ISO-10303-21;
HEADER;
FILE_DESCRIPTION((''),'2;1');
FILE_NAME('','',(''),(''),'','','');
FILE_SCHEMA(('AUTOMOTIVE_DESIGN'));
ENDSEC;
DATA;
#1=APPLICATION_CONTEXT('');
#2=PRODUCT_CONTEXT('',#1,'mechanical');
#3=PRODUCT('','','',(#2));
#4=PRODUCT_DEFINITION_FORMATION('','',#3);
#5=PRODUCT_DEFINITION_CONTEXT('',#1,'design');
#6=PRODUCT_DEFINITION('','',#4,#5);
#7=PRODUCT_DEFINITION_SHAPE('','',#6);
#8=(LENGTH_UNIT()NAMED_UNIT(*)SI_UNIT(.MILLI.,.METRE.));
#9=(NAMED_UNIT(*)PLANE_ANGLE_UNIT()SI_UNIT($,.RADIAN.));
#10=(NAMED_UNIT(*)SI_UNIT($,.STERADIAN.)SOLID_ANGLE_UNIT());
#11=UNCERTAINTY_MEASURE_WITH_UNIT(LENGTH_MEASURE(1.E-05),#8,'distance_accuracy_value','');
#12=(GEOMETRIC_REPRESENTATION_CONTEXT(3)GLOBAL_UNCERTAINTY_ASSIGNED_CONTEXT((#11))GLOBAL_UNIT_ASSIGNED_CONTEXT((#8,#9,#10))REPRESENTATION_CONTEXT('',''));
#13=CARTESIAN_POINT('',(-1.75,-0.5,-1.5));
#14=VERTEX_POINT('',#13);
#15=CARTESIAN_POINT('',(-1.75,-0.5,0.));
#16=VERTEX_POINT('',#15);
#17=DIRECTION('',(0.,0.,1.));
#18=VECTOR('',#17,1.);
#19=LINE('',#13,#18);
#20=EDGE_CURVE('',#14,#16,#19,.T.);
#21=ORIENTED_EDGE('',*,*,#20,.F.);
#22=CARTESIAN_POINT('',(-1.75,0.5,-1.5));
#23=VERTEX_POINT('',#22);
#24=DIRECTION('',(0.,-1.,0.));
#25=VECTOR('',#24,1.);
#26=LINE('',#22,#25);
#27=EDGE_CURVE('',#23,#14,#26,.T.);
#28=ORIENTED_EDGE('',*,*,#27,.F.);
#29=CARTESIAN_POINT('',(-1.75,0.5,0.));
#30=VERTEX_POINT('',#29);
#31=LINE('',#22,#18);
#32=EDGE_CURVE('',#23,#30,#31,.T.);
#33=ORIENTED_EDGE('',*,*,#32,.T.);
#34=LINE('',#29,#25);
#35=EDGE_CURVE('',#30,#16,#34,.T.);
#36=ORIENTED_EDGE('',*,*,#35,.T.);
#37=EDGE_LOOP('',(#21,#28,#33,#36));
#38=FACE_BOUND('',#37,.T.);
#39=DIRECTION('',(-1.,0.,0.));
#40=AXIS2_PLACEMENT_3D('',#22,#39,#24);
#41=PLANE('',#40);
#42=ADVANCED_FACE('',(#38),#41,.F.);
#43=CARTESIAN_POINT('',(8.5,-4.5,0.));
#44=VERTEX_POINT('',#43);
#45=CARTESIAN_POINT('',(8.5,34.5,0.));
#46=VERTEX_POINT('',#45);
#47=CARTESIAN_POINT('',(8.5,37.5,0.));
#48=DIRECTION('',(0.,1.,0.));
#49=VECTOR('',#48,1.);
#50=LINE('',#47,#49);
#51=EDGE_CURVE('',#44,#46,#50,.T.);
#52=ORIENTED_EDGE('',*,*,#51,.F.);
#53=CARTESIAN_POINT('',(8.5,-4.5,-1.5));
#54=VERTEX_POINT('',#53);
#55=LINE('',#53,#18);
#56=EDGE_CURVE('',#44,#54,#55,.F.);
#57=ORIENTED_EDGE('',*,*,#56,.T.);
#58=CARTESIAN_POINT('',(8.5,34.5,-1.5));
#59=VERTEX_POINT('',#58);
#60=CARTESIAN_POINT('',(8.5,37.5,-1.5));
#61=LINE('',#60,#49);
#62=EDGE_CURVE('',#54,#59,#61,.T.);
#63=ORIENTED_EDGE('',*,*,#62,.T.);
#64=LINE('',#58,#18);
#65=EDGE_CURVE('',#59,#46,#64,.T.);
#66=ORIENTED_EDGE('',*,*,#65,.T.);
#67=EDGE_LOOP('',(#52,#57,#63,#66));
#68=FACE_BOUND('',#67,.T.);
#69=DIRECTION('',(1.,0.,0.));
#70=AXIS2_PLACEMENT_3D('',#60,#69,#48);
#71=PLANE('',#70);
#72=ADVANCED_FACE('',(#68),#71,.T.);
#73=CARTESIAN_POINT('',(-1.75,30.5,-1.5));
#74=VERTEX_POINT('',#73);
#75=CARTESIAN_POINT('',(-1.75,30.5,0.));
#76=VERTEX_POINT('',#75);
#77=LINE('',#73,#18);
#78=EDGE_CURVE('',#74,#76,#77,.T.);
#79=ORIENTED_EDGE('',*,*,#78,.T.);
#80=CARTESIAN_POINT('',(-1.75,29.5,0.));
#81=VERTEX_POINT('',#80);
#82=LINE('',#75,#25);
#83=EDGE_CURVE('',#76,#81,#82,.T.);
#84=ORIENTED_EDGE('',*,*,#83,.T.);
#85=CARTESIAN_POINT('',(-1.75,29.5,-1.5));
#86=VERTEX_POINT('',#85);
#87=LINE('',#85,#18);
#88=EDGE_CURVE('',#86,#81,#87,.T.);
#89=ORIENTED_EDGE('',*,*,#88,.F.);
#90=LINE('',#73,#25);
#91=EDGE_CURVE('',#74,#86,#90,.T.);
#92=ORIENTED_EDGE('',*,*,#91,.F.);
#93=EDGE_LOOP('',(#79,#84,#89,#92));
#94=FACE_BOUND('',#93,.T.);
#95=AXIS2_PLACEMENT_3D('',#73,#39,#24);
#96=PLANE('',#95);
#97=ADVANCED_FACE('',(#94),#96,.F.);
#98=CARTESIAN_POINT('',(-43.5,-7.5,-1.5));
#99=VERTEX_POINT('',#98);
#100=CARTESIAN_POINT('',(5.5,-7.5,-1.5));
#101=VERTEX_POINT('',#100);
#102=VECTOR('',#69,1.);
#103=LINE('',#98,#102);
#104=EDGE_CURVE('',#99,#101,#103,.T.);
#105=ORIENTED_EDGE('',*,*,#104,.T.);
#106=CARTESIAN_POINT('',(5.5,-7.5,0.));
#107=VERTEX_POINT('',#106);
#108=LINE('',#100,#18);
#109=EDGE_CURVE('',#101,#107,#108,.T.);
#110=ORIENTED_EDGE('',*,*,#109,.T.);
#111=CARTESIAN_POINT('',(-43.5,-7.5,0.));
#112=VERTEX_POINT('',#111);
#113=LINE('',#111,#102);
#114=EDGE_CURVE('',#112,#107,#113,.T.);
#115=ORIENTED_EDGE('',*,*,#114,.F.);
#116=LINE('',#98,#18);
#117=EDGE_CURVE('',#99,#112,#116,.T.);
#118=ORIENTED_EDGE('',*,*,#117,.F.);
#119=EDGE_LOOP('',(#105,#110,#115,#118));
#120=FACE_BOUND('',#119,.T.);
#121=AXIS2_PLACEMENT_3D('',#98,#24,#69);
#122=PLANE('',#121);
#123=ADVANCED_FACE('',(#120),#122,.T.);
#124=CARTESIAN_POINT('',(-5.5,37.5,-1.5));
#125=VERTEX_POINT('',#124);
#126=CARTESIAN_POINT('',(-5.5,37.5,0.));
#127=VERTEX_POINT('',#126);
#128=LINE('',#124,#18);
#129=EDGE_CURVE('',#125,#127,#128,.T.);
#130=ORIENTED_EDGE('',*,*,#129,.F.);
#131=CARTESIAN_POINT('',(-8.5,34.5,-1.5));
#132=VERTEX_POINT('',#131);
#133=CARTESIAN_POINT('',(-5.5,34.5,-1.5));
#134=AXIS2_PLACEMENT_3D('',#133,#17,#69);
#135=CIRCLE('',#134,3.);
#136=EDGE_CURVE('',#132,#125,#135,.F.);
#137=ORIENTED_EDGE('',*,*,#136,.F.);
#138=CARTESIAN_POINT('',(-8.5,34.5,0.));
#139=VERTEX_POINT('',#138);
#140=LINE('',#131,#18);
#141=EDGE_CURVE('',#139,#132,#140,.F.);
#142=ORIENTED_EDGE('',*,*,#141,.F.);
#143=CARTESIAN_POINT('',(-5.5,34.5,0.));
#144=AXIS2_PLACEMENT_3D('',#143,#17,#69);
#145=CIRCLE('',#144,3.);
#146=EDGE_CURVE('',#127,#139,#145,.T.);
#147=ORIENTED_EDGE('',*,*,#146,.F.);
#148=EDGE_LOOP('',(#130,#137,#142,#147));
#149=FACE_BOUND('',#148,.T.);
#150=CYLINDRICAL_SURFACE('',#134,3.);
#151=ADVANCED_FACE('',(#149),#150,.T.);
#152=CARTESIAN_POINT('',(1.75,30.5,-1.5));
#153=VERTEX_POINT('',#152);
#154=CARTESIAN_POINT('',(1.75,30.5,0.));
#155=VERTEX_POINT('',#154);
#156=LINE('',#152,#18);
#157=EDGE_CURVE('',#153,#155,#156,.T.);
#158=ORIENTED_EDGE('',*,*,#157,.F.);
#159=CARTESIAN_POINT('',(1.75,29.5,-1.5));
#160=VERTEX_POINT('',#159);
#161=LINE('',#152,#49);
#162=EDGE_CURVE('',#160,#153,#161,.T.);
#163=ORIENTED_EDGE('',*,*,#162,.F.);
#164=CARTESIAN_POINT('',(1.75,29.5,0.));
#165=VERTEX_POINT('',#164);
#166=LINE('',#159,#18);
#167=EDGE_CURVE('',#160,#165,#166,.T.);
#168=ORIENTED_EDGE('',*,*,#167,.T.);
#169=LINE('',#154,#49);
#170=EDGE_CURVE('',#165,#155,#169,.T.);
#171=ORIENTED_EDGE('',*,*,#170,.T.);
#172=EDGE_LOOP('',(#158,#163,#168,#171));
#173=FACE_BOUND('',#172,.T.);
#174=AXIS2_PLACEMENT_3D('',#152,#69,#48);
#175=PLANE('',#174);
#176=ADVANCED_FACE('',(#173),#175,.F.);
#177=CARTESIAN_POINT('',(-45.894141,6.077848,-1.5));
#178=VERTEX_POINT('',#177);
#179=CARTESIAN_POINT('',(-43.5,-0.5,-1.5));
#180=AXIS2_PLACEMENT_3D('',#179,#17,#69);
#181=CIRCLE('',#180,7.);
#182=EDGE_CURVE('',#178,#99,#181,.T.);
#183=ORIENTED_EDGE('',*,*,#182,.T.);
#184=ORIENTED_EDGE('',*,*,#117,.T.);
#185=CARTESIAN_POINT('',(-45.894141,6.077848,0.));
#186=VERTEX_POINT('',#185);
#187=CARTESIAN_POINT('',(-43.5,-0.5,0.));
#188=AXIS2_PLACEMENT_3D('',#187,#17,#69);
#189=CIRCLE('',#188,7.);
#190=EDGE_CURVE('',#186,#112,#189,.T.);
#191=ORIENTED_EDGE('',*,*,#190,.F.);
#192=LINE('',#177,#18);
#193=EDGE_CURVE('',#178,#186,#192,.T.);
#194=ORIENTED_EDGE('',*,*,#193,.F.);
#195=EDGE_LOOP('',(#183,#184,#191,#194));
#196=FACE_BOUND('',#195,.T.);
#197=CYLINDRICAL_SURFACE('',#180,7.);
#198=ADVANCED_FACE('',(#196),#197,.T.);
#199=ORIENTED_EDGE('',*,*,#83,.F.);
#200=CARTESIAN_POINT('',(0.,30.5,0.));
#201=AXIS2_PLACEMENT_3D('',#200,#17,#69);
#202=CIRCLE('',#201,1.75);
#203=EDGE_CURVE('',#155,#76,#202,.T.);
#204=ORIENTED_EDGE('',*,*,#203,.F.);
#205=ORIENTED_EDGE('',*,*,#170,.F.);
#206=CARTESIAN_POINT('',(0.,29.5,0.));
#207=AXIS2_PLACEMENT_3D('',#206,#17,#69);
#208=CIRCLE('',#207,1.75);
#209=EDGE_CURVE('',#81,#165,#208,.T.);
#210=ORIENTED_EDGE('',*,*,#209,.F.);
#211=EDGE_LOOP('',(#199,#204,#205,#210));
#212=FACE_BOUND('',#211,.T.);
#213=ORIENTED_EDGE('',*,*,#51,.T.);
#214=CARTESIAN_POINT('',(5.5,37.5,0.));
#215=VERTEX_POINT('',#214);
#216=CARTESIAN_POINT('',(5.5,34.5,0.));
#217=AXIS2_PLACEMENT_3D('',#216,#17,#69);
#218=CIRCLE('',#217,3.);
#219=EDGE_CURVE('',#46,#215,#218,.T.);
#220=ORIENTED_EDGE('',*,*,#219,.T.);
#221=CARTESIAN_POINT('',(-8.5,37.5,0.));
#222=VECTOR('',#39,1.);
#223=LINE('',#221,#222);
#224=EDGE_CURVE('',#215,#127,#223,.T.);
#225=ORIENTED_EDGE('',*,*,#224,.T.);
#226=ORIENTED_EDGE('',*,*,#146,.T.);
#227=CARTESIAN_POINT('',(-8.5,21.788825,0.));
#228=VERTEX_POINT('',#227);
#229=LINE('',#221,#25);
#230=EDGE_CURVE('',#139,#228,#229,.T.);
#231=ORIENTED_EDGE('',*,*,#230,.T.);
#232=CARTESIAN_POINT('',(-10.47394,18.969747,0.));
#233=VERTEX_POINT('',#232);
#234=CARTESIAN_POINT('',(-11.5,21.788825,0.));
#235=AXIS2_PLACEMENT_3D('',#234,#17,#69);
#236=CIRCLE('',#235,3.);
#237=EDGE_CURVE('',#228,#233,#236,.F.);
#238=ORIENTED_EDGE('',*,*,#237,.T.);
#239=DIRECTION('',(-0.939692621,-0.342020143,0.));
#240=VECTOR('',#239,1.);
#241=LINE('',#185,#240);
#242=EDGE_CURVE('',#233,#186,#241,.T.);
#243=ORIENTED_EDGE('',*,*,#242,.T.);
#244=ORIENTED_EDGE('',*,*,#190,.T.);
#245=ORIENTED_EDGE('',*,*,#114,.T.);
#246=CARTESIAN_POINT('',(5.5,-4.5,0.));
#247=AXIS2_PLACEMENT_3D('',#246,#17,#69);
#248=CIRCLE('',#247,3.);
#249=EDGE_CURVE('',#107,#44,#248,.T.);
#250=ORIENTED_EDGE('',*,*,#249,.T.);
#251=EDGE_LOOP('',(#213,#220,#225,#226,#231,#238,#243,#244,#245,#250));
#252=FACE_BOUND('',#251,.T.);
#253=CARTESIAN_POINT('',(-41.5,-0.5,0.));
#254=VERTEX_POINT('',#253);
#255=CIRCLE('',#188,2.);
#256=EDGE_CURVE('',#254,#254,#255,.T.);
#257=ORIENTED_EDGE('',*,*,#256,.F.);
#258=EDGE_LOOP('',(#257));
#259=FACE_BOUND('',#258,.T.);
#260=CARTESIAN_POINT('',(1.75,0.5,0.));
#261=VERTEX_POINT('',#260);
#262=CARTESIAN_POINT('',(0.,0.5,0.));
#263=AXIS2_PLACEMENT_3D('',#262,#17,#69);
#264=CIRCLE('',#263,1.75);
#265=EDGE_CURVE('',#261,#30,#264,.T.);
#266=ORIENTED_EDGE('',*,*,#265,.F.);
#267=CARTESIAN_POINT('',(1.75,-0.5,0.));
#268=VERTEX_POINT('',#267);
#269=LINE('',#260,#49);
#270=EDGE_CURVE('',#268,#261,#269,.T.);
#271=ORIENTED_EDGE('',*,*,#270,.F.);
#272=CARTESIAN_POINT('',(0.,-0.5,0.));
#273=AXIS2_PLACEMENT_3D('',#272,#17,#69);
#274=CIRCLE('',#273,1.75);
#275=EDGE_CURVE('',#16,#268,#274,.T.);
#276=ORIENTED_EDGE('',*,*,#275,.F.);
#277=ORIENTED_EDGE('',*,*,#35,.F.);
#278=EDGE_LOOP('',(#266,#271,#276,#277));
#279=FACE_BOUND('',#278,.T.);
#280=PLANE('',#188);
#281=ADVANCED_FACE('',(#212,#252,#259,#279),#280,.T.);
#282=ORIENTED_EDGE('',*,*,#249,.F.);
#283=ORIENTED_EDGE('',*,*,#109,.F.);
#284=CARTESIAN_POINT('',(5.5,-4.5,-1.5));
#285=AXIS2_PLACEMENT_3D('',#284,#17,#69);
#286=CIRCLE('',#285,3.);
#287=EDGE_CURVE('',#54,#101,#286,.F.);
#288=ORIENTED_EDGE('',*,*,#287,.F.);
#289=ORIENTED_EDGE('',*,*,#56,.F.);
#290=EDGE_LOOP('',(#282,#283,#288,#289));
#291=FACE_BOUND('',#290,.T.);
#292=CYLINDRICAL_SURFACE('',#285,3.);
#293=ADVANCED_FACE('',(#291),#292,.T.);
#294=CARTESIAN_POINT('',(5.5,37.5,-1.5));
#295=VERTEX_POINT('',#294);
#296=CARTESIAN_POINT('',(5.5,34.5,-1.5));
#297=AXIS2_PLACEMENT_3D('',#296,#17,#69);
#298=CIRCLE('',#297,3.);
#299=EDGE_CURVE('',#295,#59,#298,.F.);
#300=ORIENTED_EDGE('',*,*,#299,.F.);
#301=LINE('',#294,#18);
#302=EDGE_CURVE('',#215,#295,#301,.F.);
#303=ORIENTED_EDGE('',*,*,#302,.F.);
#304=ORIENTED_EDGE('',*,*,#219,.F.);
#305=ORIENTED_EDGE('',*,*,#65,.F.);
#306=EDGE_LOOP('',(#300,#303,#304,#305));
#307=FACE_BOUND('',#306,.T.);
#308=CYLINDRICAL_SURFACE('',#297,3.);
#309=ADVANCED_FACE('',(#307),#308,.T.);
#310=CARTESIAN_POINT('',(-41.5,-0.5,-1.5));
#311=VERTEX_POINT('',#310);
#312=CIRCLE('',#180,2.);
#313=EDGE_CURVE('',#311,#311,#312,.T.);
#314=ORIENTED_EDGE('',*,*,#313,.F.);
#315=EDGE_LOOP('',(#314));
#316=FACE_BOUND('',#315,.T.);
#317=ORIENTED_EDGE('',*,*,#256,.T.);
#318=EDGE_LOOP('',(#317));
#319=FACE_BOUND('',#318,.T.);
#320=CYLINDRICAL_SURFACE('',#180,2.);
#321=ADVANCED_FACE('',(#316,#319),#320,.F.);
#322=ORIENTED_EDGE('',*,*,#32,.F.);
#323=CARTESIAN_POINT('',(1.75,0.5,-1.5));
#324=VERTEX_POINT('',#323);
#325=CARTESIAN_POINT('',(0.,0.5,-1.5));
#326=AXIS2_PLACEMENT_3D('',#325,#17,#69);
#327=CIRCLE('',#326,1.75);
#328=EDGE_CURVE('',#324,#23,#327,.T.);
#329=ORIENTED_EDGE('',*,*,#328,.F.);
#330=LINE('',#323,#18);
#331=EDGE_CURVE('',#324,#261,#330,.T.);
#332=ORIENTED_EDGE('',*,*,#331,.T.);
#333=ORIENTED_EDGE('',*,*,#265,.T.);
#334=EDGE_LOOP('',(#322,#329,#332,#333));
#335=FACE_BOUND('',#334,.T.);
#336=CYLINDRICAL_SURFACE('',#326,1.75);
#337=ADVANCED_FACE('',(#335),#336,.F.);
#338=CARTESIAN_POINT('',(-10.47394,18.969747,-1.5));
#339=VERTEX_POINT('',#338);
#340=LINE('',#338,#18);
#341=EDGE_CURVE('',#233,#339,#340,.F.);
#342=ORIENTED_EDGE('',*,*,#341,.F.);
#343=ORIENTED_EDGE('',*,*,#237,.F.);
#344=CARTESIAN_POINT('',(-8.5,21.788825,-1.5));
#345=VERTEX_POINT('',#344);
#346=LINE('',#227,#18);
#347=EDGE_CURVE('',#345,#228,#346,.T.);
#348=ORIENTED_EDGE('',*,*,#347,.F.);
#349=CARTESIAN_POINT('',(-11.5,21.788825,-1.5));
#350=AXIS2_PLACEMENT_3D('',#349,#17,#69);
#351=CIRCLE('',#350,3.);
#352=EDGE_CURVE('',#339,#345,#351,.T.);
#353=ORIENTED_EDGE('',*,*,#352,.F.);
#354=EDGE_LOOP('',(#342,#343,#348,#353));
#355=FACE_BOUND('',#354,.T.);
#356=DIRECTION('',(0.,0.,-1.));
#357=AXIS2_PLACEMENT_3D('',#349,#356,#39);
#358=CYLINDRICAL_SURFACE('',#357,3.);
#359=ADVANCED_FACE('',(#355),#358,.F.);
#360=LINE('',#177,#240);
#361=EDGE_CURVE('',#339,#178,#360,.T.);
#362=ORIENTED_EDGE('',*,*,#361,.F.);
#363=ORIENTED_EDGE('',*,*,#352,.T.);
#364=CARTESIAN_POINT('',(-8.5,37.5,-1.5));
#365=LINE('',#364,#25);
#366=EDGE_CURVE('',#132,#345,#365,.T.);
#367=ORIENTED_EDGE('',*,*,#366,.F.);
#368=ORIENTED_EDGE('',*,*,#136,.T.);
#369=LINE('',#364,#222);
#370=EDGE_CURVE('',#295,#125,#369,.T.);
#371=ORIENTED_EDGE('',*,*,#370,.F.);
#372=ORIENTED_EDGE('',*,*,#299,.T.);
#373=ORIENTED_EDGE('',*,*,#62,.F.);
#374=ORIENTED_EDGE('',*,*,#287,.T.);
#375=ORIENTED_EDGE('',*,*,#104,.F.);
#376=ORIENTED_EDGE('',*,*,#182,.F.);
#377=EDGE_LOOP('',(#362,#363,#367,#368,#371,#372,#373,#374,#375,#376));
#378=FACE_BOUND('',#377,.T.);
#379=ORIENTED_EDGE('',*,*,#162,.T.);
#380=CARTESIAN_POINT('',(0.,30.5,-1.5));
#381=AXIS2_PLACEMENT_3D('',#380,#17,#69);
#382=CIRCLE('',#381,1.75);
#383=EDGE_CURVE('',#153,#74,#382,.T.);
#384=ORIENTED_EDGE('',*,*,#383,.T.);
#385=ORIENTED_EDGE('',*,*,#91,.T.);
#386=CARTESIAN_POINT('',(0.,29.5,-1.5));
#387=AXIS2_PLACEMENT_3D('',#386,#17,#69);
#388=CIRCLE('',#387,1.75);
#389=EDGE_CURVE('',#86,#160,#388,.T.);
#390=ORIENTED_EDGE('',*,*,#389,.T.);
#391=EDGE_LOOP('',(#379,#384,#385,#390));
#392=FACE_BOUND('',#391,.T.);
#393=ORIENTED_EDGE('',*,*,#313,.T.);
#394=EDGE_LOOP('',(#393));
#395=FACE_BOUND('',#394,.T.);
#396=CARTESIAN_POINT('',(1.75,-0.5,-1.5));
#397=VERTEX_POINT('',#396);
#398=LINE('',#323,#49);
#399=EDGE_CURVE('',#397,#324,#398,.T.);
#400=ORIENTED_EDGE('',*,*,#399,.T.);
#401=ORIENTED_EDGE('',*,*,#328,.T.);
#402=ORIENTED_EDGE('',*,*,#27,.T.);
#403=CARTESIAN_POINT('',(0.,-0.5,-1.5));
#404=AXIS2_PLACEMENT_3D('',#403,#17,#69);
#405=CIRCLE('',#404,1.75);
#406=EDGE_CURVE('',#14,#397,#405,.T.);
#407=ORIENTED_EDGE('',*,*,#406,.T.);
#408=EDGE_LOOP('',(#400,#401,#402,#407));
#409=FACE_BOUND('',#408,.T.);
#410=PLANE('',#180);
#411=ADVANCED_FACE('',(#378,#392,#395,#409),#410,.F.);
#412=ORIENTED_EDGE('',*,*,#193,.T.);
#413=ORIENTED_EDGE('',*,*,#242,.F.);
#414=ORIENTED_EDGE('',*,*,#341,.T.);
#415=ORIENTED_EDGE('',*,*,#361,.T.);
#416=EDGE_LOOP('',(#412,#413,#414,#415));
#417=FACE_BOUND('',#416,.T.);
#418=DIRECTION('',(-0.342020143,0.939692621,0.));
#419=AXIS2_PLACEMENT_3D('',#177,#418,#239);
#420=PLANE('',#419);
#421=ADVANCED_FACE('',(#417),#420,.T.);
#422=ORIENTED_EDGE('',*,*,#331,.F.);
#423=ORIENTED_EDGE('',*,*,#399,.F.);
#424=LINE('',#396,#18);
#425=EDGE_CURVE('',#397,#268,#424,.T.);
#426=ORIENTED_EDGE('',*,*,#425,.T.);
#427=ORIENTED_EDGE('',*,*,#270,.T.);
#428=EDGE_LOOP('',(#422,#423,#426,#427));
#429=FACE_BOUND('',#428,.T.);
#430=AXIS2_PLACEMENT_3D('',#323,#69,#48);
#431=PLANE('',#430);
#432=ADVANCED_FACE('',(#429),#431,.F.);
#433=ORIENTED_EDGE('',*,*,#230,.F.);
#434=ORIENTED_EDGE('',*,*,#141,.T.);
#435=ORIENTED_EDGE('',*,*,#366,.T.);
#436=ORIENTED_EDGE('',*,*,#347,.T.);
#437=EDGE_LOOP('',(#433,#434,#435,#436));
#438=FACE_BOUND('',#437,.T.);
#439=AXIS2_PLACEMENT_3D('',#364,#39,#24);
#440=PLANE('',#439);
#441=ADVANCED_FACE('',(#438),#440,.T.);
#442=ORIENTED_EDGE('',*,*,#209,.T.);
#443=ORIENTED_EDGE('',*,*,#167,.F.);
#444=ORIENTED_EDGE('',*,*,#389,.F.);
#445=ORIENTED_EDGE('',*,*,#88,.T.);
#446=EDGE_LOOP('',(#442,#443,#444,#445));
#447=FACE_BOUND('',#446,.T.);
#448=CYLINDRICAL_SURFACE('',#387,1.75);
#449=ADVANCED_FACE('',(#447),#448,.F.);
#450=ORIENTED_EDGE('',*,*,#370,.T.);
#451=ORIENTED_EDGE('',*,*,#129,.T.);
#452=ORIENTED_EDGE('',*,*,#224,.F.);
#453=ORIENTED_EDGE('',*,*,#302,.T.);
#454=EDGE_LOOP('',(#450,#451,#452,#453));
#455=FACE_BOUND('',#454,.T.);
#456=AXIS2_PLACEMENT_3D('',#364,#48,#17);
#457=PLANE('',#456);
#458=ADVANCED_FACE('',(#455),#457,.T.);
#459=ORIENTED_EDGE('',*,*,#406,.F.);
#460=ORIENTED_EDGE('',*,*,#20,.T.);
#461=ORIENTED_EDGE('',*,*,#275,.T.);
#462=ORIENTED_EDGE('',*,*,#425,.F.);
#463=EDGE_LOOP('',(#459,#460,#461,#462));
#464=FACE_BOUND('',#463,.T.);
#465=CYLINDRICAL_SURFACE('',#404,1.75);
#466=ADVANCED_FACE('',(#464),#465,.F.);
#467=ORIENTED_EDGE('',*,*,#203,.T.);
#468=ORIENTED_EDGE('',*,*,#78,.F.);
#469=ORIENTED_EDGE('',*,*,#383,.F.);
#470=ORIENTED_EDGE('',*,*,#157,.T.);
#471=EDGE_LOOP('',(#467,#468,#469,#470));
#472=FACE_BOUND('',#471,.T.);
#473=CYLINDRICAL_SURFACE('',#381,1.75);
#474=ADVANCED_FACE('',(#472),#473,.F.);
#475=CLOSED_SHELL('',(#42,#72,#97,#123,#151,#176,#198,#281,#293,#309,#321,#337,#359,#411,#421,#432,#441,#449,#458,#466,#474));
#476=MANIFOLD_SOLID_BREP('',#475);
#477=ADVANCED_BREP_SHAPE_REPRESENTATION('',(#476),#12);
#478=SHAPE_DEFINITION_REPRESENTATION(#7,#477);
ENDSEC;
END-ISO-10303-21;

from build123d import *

# Parameters (mm, degrees)
ESQUISSE1_R               = 2
T_LE_DE_BASE_PLI_E1_DEPTH = 1.5
CONG_1_R                  = 3


# Sheet-metal steps are written as plain solids
with BuildPart() as part:
    # Esquisse1 → Tôle de base pliée1 (new body)
    with BuildSketch(Plane.XY):
        with BuildLine():
            Line((-8.5, 37.5), (8.5, 37.5))
            Line((8.5, 37.5), (8.5, -7.5))
            Line((8.5, -7.5), (-43.5, -7.5))
            ThreePointArc((-43.5, -7.5), (-50.393654271, -1.715537244), (-45.894141003, 6.077848346))
            Line((-45.894141003, 6.077848346), (-8.5, 19.688202607))
            Line((-8.5, 19.688202607), (-8.5, 37.5))
        make_face()
        with Locations((-43.5, -0.5)):
            Circle(ESQUISSE1_R, mode=Mode.SUBTRACT)
        with BuildLine():
            Line((1.75, 0.5), (1.75, -0.5))
            ThreePointArc((1.75, -0.5), (0, -2.25), (-1.75, -0.5))
            Line((-1.75, -0.5), (-1.75, 0.5))
            ThreePointArc((-1.75, 0.5), (0, 2.25), (1.75, 0.5))
        make_face(mode=Mode.SUBTRACT)
        with BuildLine():
            Line((1.75, 30.5), (1.75, 29.5))
            ThreePointArc((1.75, 29.5), (0, 27.75), (-1.75, 29.5))
            Line((-1.75, 29.5), (-1.75, 30.5))
            ThreePointArc((-1.75, 30.5), (0, 32.25), (1.75, 30.5))
        make_face(mode=Mode.SUBTRACT)
    extrude(amount=-T_LE_DE_BASE_PLI_E1_DEPTH)

    # Congé1
    cong_1_edges = [part.edges().sort_by_distance(p)[0] for p in [
        (-8.5, 37.5, -0.75),
        (8.5, 37.5, -0.75),
        (8.5, -7.5, -0.75),
        (-8.5, 19.688202607, -0.75),
    ]]
    fillet(cong_1_edges, radius=CONG_1_R)


solid = part.part
